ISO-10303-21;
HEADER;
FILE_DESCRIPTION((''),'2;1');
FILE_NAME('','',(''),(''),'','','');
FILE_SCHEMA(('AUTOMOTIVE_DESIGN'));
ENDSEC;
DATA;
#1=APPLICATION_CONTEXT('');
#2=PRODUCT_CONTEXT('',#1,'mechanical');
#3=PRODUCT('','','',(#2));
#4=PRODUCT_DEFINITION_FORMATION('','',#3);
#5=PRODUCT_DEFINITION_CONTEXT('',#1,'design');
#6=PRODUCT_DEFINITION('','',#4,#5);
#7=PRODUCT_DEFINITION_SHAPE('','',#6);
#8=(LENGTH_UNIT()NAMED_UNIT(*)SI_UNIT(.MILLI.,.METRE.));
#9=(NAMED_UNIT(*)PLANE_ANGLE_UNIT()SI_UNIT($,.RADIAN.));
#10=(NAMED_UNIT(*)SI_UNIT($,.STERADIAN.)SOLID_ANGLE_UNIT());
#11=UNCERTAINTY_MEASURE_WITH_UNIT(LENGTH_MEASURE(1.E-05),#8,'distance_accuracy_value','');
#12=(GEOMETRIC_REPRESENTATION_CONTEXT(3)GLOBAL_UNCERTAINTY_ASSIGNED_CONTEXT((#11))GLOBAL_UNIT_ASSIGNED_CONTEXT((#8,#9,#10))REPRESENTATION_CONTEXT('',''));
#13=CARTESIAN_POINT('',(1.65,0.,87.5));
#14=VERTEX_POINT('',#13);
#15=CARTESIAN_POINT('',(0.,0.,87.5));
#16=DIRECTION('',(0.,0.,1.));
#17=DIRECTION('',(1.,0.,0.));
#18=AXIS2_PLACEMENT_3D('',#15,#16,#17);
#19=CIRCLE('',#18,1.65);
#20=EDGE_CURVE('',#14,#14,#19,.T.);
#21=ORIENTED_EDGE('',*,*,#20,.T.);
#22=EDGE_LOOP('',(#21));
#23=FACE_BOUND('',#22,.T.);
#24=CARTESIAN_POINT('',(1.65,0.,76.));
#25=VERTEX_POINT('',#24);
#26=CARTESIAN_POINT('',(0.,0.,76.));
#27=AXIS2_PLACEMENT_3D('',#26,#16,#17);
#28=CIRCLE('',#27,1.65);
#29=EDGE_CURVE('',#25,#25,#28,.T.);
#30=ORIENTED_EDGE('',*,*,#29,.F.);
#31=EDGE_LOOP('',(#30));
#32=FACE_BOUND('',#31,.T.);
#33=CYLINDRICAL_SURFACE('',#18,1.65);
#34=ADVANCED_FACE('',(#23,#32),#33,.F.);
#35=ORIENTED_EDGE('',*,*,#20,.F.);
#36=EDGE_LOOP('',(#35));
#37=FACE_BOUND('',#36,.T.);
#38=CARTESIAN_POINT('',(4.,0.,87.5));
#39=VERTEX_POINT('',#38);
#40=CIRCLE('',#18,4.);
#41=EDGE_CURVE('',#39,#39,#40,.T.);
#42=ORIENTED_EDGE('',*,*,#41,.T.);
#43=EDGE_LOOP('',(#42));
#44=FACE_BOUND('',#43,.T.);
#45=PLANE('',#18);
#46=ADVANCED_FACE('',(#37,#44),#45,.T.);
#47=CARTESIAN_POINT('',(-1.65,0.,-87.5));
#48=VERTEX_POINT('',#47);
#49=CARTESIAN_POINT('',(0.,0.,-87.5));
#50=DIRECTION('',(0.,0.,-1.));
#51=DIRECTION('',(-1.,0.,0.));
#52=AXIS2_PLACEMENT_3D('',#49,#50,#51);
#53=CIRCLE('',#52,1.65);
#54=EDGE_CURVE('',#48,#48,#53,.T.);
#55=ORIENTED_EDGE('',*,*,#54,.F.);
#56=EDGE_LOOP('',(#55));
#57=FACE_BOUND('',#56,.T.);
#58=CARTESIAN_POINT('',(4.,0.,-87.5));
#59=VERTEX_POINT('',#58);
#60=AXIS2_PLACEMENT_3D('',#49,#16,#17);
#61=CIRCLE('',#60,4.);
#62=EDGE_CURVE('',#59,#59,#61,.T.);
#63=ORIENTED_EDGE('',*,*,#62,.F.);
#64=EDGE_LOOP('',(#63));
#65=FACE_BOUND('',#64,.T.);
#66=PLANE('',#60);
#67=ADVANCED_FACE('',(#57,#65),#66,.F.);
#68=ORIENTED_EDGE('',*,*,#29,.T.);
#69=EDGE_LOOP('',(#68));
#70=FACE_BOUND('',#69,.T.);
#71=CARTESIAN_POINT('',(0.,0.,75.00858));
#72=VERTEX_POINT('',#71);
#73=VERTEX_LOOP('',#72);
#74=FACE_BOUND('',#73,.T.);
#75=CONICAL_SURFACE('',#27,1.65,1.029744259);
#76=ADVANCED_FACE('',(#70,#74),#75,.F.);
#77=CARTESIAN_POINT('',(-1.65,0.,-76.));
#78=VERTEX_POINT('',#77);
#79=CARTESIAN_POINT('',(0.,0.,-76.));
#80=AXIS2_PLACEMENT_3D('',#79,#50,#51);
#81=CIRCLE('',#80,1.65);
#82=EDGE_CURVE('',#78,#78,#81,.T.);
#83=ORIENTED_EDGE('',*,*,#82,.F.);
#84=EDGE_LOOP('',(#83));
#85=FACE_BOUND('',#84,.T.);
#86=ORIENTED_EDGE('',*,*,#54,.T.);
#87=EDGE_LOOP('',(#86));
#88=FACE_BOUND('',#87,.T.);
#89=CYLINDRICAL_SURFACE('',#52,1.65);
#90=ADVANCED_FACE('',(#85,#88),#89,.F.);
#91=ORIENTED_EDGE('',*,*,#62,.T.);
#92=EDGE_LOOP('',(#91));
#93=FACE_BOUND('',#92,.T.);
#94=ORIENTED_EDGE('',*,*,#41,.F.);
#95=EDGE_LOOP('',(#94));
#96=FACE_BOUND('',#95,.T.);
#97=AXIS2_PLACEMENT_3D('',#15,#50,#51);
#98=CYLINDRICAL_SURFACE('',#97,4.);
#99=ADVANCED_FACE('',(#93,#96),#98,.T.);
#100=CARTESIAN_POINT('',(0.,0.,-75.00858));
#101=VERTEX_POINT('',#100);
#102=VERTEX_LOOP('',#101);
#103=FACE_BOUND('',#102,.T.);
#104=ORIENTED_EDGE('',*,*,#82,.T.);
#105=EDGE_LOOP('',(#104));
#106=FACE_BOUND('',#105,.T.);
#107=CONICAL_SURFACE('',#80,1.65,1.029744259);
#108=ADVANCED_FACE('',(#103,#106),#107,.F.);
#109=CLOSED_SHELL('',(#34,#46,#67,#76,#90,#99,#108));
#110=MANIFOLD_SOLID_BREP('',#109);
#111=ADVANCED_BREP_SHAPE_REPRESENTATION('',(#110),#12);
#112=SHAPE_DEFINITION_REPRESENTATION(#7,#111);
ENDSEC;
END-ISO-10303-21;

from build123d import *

# Parameters (mm, degrees)
SKETCH_1_R      = 4
SKETCH_1_R_2    = 2
EXTRUDE_1_DEPTH = 87.5


# Read off the part's stored shape, not the designer's step: M4x0.7 ねじ穴1
with BuildPart() as part:
    # ｽｹｯﾁ1 → ﾎﾞｽ - 押し出し1 (new, symmetric)
    # profile 1 of 2: a face of its own
    with BuildSketch(Plane.XY):
        Circle(SKETCH_1_R)
        Circle(SKETCH_1_R_2, mode=Mode.SUBTRACT)
    # profile 2 of 2: a face of its own
    with BuildSketch(Plane.XY):
        Circle(SKETCH_1_R_2)
    extrude(amount=EXTRUDE_1_DEPTH, both=True)

    # M4x0.7 ねじ穴1 outline → M4x0.7 ねじ穴1 (revolve, cut)
    with BuildSketch(Plane.XZ):
        Polygon((1.65, -76), (0, -75.008579979), (0, -87.5), (1.65, -87.5), align=None)
        Polygon((0, 87.5), (0, 75.008579979), (1.65, 76), (1.65, 87.5), align=None)
    revolve(axis=Axis((0, 0, 0), (0, 0, 1)), mode=Mode.SUBTRACT)


solid = part.part
